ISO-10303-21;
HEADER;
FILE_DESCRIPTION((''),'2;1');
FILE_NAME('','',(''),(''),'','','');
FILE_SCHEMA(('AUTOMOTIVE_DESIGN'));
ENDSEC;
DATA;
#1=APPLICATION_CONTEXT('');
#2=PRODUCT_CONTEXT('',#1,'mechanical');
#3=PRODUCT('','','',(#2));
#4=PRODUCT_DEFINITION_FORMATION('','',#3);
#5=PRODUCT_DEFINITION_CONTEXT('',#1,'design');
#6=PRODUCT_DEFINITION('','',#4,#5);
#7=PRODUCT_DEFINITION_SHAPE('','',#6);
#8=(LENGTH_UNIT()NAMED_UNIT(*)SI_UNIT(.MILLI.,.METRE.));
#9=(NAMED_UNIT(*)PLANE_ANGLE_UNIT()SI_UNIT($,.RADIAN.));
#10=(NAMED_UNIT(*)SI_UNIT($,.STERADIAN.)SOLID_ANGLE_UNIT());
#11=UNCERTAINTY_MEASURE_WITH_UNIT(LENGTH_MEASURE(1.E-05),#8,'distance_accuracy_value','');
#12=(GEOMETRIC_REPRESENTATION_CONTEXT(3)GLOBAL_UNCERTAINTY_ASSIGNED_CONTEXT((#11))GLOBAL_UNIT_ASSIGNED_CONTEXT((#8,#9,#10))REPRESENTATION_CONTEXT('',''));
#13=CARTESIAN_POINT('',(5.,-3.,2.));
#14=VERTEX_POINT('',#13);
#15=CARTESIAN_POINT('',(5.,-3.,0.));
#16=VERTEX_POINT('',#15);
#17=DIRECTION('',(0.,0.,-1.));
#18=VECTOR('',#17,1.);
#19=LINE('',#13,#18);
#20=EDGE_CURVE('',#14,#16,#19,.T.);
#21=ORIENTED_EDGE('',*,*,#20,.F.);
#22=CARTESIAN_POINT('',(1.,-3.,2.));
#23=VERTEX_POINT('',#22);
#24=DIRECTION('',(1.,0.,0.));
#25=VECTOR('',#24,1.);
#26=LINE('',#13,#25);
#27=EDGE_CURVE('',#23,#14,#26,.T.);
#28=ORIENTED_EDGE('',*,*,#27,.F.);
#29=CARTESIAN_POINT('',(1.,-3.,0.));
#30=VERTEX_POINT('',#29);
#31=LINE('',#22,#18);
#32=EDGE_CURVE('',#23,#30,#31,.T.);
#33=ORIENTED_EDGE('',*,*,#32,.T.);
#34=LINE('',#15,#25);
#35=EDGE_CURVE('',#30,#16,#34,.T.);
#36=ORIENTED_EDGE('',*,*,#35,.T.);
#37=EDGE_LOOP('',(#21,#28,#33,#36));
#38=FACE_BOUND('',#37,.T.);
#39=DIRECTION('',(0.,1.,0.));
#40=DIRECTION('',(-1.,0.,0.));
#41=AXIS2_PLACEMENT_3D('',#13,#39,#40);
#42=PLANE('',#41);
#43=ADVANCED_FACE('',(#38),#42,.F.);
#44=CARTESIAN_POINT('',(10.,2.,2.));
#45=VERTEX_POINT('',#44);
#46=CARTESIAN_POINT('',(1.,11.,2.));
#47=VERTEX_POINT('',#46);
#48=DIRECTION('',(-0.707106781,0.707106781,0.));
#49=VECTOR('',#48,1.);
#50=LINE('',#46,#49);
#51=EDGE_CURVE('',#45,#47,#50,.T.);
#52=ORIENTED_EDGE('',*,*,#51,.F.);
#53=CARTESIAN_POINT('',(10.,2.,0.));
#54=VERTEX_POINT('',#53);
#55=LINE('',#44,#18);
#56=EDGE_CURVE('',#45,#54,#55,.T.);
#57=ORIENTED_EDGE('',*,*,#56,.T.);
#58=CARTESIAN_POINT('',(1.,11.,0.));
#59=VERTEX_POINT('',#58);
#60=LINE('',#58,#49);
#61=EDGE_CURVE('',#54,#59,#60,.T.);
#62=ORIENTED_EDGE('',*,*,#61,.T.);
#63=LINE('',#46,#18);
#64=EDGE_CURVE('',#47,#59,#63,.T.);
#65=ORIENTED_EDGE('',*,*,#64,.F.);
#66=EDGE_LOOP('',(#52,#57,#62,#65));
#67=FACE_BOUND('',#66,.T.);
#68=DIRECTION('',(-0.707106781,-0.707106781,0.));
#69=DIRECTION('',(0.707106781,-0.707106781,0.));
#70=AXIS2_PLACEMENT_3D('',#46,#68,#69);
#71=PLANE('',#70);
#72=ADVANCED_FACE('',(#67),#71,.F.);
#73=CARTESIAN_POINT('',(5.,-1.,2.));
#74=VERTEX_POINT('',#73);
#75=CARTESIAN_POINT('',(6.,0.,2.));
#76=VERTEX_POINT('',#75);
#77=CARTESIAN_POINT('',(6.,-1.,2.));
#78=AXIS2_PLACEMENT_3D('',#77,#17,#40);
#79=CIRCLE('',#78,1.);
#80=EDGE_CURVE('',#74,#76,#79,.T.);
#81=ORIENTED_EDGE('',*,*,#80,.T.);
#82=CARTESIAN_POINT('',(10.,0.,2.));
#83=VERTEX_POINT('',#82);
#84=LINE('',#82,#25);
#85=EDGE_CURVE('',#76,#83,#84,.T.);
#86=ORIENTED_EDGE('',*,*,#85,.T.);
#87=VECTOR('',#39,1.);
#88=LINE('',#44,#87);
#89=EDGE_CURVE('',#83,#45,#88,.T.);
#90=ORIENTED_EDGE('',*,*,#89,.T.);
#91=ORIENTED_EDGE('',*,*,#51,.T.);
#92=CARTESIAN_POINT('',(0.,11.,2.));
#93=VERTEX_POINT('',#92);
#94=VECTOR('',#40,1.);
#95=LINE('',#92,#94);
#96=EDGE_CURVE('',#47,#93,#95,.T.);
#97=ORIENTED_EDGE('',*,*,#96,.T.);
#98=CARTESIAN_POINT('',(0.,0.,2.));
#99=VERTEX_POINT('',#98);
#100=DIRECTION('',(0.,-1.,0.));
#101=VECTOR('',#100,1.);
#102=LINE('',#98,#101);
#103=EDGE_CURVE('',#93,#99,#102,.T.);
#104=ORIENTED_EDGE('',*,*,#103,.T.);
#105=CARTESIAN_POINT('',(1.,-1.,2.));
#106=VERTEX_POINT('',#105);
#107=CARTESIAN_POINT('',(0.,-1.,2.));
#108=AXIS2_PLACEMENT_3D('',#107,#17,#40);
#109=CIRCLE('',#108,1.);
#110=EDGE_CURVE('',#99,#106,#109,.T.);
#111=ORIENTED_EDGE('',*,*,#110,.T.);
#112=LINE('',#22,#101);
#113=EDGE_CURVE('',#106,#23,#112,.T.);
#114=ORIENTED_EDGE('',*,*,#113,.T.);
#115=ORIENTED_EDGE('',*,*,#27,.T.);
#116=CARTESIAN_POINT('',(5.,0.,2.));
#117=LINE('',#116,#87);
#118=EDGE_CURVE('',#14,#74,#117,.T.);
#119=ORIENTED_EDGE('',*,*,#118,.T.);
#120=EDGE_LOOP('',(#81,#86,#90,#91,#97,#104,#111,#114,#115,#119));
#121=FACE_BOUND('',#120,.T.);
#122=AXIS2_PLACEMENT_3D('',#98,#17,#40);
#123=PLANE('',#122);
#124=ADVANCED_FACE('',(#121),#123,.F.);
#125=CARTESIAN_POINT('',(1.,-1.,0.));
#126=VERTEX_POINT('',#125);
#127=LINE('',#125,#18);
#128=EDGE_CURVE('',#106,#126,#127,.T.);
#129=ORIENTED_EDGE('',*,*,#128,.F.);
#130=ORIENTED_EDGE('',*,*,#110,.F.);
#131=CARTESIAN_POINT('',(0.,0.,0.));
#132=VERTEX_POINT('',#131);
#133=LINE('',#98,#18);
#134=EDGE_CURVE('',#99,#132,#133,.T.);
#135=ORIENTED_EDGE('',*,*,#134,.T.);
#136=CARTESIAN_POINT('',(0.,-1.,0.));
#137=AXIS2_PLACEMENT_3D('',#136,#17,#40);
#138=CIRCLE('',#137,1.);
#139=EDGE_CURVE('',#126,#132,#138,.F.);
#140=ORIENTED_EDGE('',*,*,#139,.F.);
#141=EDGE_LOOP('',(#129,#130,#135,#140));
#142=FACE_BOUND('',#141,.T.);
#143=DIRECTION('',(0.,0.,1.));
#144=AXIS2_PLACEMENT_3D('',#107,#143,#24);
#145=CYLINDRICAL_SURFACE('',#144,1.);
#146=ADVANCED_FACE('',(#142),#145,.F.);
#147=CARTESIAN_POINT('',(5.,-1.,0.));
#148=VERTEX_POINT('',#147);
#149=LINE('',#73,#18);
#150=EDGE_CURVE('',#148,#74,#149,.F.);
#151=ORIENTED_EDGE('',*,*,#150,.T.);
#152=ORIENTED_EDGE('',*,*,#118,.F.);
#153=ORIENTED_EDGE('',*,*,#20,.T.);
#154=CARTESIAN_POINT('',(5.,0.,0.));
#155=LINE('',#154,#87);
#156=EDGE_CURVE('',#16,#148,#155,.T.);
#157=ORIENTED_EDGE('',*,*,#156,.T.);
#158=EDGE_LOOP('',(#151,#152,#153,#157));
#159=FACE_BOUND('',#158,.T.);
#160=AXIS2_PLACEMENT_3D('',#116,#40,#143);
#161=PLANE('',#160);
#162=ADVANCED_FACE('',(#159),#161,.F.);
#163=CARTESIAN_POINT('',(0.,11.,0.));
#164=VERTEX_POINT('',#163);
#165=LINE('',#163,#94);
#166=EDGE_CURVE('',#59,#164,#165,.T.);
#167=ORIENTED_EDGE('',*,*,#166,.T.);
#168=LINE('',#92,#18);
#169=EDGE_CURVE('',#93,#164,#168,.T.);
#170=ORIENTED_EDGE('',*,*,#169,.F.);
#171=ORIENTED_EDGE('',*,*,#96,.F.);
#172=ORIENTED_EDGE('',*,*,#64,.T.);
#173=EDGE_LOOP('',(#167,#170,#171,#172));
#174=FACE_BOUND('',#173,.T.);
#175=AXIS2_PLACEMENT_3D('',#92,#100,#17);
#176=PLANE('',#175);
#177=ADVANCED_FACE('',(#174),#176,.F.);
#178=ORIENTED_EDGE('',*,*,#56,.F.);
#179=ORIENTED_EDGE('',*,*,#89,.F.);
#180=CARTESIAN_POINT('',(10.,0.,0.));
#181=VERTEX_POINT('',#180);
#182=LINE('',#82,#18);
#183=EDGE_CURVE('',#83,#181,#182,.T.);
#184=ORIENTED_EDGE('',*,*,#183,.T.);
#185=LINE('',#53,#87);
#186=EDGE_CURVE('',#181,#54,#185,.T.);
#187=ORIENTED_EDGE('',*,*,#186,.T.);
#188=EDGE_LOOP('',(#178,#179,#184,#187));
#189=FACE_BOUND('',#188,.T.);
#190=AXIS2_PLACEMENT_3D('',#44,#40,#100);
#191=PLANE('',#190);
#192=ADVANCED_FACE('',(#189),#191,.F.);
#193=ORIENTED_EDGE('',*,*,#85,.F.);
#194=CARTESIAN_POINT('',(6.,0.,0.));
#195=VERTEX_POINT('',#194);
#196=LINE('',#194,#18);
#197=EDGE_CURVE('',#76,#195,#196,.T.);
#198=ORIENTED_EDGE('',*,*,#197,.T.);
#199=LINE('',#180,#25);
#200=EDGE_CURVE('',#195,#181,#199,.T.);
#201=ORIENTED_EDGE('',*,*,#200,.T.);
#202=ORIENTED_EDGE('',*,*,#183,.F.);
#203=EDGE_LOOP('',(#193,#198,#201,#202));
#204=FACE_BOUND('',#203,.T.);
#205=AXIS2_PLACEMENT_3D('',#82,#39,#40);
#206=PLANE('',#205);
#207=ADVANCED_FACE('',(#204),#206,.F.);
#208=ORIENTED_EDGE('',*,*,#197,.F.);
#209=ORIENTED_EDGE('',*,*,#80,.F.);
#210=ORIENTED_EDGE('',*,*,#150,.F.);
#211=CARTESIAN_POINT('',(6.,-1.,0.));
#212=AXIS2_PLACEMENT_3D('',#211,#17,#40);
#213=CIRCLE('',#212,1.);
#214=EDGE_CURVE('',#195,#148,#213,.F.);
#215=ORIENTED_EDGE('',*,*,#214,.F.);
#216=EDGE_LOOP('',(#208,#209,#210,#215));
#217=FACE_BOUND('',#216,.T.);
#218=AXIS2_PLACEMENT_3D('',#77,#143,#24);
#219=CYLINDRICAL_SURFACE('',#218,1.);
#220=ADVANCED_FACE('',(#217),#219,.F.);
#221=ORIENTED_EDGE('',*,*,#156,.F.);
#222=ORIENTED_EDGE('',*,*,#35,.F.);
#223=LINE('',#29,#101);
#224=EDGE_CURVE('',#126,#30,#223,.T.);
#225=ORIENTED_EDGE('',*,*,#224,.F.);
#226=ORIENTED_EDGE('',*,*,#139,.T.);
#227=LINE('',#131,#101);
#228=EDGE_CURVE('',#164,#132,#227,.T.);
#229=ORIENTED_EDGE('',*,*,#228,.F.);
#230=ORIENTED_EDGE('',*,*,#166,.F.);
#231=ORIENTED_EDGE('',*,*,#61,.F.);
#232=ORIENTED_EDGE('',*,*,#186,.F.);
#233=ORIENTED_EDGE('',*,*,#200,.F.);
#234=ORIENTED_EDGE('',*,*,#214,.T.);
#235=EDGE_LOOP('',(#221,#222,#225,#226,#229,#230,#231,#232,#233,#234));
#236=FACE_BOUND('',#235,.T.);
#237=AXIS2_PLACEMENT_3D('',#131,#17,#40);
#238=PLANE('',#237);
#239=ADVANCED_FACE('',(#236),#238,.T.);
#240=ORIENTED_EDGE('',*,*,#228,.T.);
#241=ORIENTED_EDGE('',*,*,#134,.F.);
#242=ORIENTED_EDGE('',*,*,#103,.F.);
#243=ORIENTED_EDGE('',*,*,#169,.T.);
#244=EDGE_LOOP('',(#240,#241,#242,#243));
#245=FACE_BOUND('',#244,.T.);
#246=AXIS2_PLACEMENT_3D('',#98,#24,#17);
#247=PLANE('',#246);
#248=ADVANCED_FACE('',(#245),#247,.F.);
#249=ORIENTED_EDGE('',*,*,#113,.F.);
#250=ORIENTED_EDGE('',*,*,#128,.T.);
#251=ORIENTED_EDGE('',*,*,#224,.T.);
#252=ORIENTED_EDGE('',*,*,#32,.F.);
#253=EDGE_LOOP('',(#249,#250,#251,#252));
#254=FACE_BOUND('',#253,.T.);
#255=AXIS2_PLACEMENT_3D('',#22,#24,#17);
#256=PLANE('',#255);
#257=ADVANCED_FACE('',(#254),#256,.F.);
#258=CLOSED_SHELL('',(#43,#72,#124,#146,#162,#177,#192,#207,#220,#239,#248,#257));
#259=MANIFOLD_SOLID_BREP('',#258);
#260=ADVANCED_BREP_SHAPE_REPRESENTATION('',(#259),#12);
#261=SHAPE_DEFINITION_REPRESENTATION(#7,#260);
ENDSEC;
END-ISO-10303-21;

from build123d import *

# Parameters (mm, degrees)
BOSS_EXTRU_1_DEPTH = 2
CONG_1_R           = 1


with BuildPart() as part:
    # Esquisse1 → Boss.-Extru.1 (new body)
    with BuildSketch(Plane.XY):
        Polygon((0, 0), (0, 11), (1, 11), (10, 2), (10, 0), (5, 0), (5, -3), (1, -3), (1, 0), align=None)
    extrude(amount=BOSS_EXTRU_1_DEPTH)

    # Congé1
    cong_1_edges = [part.edges().sort_by_distance(p)[0] for p in [
        (5, 0, 1),
        (1, 0, 1),
    ]]
    fillet(cong_1_edges, radius=CONG_1_R - 0.0001)  # a hair under: the kernel refuses the full size


solid = part.part
